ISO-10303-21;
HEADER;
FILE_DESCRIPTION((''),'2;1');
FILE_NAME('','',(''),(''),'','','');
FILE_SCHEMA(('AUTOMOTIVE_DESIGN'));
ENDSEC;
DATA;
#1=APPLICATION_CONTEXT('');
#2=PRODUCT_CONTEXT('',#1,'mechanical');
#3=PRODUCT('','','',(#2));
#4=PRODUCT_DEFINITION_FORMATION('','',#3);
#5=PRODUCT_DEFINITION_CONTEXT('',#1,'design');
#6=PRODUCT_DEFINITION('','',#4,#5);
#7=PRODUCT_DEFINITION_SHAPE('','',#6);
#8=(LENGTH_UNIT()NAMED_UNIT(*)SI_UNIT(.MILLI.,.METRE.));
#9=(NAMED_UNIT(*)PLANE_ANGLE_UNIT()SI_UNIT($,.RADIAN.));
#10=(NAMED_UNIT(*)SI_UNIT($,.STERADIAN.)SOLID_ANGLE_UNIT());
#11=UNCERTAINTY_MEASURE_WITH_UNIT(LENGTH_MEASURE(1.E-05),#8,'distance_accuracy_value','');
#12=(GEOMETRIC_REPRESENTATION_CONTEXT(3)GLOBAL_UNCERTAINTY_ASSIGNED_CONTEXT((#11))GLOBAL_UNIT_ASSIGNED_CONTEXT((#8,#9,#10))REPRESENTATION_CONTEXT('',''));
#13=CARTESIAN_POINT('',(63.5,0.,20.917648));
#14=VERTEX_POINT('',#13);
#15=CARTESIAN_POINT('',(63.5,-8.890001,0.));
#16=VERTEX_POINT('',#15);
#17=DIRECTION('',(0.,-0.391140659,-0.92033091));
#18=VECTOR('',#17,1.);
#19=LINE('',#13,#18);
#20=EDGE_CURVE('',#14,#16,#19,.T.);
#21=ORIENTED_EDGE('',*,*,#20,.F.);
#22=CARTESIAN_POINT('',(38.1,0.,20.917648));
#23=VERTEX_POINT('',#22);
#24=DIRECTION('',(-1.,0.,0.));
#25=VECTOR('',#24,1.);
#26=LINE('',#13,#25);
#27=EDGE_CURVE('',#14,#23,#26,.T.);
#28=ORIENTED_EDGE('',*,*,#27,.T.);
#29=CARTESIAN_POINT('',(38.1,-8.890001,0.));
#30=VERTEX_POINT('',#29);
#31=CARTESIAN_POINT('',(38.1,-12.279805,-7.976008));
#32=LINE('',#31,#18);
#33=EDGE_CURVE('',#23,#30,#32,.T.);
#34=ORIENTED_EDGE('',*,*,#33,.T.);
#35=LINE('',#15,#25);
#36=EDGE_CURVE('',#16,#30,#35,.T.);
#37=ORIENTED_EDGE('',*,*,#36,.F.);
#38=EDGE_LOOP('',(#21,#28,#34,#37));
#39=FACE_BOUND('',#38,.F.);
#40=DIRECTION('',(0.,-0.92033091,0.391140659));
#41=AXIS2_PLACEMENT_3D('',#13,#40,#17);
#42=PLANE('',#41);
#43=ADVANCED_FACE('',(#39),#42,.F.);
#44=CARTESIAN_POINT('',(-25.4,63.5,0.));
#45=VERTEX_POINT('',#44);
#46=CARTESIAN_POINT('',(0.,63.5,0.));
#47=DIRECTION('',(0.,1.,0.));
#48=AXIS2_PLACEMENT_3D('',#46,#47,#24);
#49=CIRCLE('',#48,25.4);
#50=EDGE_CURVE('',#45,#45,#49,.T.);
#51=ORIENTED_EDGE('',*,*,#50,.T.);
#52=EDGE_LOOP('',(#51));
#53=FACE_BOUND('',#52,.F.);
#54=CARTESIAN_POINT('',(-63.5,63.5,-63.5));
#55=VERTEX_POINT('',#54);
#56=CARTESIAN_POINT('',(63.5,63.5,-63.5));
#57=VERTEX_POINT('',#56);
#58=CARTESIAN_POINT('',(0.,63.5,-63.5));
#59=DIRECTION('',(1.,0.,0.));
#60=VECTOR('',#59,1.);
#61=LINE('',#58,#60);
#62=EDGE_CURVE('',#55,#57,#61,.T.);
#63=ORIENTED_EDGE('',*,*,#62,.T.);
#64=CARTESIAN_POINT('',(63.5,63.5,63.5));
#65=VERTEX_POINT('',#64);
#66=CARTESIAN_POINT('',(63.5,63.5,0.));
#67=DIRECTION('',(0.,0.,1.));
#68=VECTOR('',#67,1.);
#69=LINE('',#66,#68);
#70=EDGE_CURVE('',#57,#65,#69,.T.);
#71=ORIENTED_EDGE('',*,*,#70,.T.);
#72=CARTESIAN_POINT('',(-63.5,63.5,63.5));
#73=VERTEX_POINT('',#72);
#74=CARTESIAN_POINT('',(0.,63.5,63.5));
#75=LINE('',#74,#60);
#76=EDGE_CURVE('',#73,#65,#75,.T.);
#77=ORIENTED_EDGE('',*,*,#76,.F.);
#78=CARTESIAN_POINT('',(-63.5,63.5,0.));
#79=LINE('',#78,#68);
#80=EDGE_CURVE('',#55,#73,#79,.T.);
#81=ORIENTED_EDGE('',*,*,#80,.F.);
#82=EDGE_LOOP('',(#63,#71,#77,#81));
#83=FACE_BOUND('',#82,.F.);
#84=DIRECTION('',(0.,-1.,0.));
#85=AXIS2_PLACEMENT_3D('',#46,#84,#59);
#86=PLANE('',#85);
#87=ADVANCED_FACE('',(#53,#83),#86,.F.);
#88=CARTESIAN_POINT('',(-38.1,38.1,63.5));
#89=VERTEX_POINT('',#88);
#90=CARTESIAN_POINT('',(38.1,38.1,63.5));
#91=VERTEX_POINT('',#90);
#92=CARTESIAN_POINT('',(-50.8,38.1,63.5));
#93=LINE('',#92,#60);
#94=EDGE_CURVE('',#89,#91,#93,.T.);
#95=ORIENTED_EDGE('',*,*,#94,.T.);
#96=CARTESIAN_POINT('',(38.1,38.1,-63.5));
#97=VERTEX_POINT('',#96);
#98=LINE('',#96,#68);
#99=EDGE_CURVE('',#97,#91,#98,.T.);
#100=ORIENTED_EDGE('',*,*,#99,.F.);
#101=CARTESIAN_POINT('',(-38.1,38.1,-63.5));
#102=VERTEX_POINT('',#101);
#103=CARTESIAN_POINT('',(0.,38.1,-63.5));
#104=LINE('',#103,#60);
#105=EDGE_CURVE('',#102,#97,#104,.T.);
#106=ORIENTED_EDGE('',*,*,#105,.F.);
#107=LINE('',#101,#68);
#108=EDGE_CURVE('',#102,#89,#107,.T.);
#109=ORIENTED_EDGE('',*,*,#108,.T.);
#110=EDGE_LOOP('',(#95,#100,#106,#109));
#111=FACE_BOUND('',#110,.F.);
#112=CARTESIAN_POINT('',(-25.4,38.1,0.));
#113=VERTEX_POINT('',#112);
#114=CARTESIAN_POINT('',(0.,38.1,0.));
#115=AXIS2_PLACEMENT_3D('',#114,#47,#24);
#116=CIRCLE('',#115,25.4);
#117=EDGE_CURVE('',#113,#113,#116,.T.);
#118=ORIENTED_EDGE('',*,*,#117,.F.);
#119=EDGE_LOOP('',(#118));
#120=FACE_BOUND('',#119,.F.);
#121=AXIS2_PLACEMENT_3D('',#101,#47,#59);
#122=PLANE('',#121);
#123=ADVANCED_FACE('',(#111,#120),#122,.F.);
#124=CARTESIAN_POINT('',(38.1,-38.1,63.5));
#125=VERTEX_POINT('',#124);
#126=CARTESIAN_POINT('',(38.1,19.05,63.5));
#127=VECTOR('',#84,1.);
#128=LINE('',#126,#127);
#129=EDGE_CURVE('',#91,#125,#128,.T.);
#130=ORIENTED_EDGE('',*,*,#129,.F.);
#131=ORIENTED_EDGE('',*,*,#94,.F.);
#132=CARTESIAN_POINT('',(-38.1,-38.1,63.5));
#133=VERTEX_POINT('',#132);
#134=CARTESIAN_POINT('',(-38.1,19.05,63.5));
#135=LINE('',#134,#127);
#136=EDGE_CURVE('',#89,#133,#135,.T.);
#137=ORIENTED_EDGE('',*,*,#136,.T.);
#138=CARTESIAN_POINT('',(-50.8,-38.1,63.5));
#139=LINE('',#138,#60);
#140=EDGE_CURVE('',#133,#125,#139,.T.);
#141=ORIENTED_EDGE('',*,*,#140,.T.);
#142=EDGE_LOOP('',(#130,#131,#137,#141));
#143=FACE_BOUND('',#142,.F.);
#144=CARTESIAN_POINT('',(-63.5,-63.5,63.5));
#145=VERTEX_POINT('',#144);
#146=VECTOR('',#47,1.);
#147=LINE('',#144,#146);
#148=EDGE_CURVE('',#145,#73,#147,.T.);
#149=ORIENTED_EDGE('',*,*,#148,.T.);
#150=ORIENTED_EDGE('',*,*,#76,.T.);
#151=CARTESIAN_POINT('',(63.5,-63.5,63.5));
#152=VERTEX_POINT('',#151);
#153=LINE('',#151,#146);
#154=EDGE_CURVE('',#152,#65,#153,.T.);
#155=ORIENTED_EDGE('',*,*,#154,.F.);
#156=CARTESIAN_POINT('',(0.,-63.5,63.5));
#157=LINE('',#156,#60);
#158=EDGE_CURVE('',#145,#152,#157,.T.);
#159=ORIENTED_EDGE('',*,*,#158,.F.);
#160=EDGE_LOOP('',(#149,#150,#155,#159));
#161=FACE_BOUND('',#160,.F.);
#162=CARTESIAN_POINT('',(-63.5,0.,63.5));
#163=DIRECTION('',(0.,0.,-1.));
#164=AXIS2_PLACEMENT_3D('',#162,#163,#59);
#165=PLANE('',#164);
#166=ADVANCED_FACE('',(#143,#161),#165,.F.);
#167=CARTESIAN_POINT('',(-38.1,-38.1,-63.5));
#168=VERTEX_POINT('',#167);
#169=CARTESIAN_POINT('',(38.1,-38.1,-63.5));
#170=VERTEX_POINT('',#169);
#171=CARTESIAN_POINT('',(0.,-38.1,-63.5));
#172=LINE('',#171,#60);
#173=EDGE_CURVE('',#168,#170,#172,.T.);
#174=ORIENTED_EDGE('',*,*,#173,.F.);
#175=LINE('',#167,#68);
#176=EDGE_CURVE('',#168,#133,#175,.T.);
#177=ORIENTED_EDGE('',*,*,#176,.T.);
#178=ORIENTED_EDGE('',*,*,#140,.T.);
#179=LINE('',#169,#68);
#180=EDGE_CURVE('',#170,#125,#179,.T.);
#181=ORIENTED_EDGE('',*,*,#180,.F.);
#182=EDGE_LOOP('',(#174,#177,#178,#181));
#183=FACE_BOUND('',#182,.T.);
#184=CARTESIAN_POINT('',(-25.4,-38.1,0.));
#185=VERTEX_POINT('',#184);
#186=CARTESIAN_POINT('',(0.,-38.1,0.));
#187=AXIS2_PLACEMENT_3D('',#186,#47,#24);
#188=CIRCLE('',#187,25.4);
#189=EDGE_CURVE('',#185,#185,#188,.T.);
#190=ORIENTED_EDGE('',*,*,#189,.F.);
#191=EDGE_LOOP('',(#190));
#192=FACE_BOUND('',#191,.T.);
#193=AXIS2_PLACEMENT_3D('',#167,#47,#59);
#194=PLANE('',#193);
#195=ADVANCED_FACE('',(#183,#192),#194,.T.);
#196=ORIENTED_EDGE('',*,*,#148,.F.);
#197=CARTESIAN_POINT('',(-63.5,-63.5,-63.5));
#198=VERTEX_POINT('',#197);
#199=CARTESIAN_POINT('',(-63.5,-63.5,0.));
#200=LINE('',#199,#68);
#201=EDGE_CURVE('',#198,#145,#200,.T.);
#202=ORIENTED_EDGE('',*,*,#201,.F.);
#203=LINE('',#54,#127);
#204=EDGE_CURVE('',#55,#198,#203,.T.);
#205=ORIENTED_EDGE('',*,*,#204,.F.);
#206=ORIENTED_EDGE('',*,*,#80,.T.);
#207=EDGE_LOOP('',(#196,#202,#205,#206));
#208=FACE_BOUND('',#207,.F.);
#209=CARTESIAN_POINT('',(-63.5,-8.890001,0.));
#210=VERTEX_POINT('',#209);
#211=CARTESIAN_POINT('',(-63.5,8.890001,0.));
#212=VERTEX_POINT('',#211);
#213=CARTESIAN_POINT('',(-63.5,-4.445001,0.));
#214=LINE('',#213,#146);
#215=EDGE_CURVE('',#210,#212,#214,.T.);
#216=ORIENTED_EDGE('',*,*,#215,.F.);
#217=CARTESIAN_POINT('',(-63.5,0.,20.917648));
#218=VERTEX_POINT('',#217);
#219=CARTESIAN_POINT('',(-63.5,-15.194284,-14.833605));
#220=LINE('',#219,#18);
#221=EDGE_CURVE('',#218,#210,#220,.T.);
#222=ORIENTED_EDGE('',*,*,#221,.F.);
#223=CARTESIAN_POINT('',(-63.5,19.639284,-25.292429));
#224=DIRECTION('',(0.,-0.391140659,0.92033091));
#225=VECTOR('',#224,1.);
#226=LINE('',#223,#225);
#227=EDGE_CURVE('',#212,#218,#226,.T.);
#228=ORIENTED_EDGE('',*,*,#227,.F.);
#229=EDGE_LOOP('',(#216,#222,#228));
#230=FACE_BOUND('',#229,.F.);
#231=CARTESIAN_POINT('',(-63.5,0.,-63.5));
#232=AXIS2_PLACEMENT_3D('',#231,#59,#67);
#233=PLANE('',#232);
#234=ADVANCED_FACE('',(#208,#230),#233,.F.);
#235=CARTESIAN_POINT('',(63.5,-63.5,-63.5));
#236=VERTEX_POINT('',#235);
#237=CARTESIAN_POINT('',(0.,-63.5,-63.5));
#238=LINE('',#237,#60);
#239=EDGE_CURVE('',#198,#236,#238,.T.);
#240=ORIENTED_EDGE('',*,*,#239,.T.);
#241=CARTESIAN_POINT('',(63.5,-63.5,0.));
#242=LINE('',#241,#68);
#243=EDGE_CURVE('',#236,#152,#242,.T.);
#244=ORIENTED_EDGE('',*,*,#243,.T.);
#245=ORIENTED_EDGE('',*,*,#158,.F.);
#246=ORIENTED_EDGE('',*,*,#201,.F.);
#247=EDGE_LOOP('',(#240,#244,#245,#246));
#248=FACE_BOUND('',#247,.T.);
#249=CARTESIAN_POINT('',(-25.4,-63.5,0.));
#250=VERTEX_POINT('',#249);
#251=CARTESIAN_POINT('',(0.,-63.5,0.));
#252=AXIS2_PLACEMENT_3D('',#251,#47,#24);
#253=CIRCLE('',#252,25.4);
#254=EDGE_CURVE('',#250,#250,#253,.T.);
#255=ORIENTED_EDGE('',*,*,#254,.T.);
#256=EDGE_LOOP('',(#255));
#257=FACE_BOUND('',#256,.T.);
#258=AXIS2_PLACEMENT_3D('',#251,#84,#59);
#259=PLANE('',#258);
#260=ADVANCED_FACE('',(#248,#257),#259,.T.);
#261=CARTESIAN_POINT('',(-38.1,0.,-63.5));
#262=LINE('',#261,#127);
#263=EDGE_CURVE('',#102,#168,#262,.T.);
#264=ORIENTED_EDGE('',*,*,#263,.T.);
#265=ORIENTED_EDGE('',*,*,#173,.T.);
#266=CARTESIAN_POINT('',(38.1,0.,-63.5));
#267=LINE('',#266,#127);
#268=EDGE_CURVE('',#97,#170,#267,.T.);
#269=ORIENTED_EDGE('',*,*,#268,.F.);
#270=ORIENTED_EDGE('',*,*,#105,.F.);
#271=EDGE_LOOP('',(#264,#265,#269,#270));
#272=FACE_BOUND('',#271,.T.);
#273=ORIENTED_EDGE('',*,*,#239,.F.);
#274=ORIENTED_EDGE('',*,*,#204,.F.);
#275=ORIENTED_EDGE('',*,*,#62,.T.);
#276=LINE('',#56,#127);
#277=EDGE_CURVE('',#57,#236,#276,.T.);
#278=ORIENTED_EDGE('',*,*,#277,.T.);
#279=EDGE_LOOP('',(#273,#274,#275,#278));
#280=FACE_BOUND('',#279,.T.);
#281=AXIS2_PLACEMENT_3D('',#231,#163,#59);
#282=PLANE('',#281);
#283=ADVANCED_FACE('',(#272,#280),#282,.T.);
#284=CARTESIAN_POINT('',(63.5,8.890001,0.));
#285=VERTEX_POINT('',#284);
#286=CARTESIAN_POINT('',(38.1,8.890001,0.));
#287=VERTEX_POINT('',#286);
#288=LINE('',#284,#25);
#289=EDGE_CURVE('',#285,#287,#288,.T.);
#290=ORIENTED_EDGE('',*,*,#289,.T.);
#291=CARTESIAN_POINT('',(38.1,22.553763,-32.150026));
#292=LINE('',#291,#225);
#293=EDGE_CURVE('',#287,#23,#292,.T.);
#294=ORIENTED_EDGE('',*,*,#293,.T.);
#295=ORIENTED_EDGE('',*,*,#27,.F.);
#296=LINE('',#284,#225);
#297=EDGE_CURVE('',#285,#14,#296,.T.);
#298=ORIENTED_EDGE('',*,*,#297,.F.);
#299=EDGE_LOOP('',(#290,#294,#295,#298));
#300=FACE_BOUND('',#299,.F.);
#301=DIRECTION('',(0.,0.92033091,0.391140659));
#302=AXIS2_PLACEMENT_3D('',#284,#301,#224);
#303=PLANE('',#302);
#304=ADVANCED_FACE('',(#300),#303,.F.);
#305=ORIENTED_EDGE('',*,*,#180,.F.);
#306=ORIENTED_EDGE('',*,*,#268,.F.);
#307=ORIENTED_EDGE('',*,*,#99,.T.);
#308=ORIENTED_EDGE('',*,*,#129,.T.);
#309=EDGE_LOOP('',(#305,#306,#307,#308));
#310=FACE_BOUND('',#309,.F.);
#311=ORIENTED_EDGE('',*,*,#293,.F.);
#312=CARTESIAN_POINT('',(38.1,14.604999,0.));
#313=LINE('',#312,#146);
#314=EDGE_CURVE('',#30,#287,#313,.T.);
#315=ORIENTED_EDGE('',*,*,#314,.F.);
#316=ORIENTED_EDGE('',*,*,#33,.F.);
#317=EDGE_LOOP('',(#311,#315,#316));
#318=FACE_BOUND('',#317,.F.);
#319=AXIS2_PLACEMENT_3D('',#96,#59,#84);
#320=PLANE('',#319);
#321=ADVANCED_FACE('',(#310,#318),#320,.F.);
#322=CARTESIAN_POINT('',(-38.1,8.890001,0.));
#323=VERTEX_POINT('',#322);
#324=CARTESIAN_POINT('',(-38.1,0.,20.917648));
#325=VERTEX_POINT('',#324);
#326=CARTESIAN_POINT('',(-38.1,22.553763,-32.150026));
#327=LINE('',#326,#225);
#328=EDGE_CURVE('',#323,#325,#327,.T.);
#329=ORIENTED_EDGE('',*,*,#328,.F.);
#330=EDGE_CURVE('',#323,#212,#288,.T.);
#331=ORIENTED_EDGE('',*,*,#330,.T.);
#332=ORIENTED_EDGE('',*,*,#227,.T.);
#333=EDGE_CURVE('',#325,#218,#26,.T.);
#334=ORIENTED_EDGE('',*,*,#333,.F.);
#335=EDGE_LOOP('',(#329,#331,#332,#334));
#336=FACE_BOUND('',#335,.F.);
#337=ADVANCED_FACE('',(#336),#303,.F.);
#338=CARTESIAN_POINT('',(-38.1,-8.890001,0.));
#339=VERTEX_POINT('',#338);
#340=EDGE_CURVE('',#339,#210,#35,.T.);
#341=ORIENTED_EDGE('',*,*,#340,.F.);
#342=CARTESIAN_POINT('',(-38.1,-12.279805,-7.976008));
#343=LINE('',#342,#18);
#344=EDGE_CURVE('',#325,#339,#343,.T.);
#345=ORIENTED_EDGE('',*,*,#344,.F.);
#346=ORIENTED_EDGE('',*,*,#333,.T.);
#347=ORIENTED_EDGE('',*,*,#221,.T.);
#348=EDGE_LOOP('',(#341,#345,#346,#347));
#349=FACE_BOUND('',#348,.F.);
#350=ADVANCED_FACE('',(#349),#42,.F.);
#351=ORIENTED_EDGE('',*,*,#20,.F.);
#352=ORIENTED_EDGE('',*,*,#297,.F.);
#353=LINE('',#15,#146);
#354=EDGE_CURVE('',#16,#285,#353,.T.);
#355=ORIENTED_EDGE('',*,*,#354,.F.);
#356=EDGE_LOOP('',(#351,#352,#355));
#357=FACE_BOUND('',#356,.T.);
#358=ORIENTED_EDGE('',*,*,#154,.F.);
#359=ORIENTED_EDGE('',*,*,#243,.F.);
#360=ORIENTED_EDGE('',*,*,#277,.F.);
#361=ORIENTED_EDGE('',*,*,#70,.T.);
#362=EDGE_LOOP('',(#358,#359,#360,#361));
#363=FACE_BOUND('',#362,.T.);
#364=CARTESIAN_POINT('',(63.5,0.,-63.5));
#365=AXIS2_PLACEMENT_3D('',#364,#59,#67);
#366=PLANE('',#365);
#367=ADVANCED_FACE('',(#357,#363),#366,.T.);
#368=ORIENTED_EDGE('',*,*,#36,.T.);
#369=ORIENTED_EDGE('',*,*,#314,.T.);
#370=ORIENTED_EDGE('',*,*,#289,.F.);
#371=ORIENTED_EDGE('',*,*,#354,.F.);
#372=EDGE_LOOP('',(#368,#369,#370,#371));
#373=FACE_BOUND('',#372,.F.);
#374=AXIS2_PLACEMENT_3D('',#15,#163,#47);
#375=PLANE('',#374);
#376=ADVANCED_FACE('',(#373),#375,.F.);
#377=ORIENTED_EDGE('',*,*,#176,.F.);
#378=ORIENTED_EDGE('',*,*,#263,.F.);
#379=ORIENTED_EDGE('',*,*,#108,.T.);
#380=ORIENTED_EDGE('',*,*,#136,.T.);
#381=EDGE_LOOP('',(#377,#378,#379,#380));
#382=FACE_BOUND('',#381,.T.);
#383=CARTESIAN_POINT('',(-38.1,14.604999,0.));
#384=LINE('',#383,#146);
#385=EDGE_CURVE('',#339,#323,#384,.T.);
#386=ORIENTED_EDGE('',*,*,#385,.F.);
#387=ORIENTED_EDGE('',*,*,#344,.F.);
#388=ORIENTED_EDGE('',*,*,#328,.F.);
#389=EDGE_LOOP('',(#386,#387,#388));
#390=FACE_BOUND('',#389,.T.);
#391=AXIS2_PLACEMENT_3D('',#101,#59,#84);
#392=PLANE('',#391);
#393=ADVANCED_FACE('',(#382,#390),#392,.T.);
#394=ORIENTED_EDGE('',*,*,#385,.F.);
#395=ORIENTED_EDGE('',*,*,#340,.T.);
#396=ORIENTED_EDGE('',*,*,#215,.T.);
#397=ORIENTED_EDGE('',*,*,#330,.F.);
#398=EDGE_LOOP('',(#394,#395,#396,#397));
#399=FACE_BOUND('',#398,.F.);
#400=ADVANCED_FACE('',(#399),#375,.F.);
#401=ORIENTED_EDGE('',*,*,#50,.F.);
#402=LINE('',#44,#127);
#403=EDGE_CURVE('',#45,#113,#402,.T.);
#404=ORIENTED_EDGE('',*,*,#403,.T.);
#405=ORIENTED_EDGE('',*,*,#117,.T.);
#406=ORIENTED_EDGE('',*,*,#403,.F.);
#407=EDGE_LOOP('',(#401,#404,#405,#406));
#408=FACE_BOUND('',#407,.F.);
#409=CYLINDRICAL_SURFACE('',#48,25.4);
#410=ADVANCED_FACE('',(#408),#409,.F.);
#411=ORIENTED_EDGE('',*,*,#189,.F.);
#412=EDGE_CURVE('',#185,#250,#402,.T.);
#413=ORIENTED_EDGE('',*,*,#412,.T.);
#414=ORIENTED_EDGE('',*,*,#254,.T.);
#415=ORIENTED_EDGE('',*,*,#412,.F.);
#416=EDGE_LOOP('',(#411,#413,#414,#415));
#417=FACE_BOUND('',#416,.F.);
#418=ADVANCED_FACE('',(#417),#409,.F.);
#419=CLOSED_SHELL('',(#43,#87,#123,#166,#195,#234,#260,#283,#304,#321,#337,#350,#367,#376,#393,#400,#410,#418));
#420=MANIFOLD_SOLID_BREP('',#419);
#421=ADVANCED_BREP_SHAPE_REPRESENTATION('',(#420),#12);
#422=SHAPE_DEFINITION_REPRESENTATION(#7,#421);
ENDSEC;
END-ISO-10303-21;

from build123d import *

# Parameters (mm, degrees)
F1_W     = 127
F1_H     = 127
F2_DEPTH = 63.5
F3_W     = 76.2
F3_H     = 76.2
F4_DEPTH = 135.636
F6_DEPTH = 146.304
F7_R     = 25.4
F8_DEPTH = 141.986


# Not quite as in the source:
# - a variable given as a bare number and used for a length is read in inches; the dataset says mm whatever the document's units were


with BuildPart() as f2:
    # F1 (on Front) → F2 (new body, symmetric)
    with BuildSketch(Plane.XZ):
        Rectangle(F1_W, F1_H)
    extrude(amount=F2_DEPTH, both=True)

    # F3 (on face) → F4 (cut)
    with BuildSketch(Plane(origin=(0, 0, -63.5), x_dir=(1, 0, 0), z_dir=(0, 0, -1))):
        Rectangle(F3_W, F3_H)
    extrude(amount=-F4_DEPTH, mode=Mode.SUBTRACT)

    # F5 (on face) → F6 (cut)
    with BuildSketch(Plane.YZ.offset(63.5)):
        Polygon((8.8900011033, 0), (0, 20.9176484495), (-8.8900011033, 0), align=None)
    extrude(amount=-F6_DEPTH, mode=Mode.SUBTRACT)

    # F7 (on face) → F8 (cut)
    with BuildSketch(Plane(origin=(0, 63.5, 0), x_dir=(-1, 0, 0), z_dir=(0, 1, 0))):
        Circle(F7_R)
    extrude(amount=-F8_DEPTH, mode=Mode.SUBTRACT)


solid = f2.part
